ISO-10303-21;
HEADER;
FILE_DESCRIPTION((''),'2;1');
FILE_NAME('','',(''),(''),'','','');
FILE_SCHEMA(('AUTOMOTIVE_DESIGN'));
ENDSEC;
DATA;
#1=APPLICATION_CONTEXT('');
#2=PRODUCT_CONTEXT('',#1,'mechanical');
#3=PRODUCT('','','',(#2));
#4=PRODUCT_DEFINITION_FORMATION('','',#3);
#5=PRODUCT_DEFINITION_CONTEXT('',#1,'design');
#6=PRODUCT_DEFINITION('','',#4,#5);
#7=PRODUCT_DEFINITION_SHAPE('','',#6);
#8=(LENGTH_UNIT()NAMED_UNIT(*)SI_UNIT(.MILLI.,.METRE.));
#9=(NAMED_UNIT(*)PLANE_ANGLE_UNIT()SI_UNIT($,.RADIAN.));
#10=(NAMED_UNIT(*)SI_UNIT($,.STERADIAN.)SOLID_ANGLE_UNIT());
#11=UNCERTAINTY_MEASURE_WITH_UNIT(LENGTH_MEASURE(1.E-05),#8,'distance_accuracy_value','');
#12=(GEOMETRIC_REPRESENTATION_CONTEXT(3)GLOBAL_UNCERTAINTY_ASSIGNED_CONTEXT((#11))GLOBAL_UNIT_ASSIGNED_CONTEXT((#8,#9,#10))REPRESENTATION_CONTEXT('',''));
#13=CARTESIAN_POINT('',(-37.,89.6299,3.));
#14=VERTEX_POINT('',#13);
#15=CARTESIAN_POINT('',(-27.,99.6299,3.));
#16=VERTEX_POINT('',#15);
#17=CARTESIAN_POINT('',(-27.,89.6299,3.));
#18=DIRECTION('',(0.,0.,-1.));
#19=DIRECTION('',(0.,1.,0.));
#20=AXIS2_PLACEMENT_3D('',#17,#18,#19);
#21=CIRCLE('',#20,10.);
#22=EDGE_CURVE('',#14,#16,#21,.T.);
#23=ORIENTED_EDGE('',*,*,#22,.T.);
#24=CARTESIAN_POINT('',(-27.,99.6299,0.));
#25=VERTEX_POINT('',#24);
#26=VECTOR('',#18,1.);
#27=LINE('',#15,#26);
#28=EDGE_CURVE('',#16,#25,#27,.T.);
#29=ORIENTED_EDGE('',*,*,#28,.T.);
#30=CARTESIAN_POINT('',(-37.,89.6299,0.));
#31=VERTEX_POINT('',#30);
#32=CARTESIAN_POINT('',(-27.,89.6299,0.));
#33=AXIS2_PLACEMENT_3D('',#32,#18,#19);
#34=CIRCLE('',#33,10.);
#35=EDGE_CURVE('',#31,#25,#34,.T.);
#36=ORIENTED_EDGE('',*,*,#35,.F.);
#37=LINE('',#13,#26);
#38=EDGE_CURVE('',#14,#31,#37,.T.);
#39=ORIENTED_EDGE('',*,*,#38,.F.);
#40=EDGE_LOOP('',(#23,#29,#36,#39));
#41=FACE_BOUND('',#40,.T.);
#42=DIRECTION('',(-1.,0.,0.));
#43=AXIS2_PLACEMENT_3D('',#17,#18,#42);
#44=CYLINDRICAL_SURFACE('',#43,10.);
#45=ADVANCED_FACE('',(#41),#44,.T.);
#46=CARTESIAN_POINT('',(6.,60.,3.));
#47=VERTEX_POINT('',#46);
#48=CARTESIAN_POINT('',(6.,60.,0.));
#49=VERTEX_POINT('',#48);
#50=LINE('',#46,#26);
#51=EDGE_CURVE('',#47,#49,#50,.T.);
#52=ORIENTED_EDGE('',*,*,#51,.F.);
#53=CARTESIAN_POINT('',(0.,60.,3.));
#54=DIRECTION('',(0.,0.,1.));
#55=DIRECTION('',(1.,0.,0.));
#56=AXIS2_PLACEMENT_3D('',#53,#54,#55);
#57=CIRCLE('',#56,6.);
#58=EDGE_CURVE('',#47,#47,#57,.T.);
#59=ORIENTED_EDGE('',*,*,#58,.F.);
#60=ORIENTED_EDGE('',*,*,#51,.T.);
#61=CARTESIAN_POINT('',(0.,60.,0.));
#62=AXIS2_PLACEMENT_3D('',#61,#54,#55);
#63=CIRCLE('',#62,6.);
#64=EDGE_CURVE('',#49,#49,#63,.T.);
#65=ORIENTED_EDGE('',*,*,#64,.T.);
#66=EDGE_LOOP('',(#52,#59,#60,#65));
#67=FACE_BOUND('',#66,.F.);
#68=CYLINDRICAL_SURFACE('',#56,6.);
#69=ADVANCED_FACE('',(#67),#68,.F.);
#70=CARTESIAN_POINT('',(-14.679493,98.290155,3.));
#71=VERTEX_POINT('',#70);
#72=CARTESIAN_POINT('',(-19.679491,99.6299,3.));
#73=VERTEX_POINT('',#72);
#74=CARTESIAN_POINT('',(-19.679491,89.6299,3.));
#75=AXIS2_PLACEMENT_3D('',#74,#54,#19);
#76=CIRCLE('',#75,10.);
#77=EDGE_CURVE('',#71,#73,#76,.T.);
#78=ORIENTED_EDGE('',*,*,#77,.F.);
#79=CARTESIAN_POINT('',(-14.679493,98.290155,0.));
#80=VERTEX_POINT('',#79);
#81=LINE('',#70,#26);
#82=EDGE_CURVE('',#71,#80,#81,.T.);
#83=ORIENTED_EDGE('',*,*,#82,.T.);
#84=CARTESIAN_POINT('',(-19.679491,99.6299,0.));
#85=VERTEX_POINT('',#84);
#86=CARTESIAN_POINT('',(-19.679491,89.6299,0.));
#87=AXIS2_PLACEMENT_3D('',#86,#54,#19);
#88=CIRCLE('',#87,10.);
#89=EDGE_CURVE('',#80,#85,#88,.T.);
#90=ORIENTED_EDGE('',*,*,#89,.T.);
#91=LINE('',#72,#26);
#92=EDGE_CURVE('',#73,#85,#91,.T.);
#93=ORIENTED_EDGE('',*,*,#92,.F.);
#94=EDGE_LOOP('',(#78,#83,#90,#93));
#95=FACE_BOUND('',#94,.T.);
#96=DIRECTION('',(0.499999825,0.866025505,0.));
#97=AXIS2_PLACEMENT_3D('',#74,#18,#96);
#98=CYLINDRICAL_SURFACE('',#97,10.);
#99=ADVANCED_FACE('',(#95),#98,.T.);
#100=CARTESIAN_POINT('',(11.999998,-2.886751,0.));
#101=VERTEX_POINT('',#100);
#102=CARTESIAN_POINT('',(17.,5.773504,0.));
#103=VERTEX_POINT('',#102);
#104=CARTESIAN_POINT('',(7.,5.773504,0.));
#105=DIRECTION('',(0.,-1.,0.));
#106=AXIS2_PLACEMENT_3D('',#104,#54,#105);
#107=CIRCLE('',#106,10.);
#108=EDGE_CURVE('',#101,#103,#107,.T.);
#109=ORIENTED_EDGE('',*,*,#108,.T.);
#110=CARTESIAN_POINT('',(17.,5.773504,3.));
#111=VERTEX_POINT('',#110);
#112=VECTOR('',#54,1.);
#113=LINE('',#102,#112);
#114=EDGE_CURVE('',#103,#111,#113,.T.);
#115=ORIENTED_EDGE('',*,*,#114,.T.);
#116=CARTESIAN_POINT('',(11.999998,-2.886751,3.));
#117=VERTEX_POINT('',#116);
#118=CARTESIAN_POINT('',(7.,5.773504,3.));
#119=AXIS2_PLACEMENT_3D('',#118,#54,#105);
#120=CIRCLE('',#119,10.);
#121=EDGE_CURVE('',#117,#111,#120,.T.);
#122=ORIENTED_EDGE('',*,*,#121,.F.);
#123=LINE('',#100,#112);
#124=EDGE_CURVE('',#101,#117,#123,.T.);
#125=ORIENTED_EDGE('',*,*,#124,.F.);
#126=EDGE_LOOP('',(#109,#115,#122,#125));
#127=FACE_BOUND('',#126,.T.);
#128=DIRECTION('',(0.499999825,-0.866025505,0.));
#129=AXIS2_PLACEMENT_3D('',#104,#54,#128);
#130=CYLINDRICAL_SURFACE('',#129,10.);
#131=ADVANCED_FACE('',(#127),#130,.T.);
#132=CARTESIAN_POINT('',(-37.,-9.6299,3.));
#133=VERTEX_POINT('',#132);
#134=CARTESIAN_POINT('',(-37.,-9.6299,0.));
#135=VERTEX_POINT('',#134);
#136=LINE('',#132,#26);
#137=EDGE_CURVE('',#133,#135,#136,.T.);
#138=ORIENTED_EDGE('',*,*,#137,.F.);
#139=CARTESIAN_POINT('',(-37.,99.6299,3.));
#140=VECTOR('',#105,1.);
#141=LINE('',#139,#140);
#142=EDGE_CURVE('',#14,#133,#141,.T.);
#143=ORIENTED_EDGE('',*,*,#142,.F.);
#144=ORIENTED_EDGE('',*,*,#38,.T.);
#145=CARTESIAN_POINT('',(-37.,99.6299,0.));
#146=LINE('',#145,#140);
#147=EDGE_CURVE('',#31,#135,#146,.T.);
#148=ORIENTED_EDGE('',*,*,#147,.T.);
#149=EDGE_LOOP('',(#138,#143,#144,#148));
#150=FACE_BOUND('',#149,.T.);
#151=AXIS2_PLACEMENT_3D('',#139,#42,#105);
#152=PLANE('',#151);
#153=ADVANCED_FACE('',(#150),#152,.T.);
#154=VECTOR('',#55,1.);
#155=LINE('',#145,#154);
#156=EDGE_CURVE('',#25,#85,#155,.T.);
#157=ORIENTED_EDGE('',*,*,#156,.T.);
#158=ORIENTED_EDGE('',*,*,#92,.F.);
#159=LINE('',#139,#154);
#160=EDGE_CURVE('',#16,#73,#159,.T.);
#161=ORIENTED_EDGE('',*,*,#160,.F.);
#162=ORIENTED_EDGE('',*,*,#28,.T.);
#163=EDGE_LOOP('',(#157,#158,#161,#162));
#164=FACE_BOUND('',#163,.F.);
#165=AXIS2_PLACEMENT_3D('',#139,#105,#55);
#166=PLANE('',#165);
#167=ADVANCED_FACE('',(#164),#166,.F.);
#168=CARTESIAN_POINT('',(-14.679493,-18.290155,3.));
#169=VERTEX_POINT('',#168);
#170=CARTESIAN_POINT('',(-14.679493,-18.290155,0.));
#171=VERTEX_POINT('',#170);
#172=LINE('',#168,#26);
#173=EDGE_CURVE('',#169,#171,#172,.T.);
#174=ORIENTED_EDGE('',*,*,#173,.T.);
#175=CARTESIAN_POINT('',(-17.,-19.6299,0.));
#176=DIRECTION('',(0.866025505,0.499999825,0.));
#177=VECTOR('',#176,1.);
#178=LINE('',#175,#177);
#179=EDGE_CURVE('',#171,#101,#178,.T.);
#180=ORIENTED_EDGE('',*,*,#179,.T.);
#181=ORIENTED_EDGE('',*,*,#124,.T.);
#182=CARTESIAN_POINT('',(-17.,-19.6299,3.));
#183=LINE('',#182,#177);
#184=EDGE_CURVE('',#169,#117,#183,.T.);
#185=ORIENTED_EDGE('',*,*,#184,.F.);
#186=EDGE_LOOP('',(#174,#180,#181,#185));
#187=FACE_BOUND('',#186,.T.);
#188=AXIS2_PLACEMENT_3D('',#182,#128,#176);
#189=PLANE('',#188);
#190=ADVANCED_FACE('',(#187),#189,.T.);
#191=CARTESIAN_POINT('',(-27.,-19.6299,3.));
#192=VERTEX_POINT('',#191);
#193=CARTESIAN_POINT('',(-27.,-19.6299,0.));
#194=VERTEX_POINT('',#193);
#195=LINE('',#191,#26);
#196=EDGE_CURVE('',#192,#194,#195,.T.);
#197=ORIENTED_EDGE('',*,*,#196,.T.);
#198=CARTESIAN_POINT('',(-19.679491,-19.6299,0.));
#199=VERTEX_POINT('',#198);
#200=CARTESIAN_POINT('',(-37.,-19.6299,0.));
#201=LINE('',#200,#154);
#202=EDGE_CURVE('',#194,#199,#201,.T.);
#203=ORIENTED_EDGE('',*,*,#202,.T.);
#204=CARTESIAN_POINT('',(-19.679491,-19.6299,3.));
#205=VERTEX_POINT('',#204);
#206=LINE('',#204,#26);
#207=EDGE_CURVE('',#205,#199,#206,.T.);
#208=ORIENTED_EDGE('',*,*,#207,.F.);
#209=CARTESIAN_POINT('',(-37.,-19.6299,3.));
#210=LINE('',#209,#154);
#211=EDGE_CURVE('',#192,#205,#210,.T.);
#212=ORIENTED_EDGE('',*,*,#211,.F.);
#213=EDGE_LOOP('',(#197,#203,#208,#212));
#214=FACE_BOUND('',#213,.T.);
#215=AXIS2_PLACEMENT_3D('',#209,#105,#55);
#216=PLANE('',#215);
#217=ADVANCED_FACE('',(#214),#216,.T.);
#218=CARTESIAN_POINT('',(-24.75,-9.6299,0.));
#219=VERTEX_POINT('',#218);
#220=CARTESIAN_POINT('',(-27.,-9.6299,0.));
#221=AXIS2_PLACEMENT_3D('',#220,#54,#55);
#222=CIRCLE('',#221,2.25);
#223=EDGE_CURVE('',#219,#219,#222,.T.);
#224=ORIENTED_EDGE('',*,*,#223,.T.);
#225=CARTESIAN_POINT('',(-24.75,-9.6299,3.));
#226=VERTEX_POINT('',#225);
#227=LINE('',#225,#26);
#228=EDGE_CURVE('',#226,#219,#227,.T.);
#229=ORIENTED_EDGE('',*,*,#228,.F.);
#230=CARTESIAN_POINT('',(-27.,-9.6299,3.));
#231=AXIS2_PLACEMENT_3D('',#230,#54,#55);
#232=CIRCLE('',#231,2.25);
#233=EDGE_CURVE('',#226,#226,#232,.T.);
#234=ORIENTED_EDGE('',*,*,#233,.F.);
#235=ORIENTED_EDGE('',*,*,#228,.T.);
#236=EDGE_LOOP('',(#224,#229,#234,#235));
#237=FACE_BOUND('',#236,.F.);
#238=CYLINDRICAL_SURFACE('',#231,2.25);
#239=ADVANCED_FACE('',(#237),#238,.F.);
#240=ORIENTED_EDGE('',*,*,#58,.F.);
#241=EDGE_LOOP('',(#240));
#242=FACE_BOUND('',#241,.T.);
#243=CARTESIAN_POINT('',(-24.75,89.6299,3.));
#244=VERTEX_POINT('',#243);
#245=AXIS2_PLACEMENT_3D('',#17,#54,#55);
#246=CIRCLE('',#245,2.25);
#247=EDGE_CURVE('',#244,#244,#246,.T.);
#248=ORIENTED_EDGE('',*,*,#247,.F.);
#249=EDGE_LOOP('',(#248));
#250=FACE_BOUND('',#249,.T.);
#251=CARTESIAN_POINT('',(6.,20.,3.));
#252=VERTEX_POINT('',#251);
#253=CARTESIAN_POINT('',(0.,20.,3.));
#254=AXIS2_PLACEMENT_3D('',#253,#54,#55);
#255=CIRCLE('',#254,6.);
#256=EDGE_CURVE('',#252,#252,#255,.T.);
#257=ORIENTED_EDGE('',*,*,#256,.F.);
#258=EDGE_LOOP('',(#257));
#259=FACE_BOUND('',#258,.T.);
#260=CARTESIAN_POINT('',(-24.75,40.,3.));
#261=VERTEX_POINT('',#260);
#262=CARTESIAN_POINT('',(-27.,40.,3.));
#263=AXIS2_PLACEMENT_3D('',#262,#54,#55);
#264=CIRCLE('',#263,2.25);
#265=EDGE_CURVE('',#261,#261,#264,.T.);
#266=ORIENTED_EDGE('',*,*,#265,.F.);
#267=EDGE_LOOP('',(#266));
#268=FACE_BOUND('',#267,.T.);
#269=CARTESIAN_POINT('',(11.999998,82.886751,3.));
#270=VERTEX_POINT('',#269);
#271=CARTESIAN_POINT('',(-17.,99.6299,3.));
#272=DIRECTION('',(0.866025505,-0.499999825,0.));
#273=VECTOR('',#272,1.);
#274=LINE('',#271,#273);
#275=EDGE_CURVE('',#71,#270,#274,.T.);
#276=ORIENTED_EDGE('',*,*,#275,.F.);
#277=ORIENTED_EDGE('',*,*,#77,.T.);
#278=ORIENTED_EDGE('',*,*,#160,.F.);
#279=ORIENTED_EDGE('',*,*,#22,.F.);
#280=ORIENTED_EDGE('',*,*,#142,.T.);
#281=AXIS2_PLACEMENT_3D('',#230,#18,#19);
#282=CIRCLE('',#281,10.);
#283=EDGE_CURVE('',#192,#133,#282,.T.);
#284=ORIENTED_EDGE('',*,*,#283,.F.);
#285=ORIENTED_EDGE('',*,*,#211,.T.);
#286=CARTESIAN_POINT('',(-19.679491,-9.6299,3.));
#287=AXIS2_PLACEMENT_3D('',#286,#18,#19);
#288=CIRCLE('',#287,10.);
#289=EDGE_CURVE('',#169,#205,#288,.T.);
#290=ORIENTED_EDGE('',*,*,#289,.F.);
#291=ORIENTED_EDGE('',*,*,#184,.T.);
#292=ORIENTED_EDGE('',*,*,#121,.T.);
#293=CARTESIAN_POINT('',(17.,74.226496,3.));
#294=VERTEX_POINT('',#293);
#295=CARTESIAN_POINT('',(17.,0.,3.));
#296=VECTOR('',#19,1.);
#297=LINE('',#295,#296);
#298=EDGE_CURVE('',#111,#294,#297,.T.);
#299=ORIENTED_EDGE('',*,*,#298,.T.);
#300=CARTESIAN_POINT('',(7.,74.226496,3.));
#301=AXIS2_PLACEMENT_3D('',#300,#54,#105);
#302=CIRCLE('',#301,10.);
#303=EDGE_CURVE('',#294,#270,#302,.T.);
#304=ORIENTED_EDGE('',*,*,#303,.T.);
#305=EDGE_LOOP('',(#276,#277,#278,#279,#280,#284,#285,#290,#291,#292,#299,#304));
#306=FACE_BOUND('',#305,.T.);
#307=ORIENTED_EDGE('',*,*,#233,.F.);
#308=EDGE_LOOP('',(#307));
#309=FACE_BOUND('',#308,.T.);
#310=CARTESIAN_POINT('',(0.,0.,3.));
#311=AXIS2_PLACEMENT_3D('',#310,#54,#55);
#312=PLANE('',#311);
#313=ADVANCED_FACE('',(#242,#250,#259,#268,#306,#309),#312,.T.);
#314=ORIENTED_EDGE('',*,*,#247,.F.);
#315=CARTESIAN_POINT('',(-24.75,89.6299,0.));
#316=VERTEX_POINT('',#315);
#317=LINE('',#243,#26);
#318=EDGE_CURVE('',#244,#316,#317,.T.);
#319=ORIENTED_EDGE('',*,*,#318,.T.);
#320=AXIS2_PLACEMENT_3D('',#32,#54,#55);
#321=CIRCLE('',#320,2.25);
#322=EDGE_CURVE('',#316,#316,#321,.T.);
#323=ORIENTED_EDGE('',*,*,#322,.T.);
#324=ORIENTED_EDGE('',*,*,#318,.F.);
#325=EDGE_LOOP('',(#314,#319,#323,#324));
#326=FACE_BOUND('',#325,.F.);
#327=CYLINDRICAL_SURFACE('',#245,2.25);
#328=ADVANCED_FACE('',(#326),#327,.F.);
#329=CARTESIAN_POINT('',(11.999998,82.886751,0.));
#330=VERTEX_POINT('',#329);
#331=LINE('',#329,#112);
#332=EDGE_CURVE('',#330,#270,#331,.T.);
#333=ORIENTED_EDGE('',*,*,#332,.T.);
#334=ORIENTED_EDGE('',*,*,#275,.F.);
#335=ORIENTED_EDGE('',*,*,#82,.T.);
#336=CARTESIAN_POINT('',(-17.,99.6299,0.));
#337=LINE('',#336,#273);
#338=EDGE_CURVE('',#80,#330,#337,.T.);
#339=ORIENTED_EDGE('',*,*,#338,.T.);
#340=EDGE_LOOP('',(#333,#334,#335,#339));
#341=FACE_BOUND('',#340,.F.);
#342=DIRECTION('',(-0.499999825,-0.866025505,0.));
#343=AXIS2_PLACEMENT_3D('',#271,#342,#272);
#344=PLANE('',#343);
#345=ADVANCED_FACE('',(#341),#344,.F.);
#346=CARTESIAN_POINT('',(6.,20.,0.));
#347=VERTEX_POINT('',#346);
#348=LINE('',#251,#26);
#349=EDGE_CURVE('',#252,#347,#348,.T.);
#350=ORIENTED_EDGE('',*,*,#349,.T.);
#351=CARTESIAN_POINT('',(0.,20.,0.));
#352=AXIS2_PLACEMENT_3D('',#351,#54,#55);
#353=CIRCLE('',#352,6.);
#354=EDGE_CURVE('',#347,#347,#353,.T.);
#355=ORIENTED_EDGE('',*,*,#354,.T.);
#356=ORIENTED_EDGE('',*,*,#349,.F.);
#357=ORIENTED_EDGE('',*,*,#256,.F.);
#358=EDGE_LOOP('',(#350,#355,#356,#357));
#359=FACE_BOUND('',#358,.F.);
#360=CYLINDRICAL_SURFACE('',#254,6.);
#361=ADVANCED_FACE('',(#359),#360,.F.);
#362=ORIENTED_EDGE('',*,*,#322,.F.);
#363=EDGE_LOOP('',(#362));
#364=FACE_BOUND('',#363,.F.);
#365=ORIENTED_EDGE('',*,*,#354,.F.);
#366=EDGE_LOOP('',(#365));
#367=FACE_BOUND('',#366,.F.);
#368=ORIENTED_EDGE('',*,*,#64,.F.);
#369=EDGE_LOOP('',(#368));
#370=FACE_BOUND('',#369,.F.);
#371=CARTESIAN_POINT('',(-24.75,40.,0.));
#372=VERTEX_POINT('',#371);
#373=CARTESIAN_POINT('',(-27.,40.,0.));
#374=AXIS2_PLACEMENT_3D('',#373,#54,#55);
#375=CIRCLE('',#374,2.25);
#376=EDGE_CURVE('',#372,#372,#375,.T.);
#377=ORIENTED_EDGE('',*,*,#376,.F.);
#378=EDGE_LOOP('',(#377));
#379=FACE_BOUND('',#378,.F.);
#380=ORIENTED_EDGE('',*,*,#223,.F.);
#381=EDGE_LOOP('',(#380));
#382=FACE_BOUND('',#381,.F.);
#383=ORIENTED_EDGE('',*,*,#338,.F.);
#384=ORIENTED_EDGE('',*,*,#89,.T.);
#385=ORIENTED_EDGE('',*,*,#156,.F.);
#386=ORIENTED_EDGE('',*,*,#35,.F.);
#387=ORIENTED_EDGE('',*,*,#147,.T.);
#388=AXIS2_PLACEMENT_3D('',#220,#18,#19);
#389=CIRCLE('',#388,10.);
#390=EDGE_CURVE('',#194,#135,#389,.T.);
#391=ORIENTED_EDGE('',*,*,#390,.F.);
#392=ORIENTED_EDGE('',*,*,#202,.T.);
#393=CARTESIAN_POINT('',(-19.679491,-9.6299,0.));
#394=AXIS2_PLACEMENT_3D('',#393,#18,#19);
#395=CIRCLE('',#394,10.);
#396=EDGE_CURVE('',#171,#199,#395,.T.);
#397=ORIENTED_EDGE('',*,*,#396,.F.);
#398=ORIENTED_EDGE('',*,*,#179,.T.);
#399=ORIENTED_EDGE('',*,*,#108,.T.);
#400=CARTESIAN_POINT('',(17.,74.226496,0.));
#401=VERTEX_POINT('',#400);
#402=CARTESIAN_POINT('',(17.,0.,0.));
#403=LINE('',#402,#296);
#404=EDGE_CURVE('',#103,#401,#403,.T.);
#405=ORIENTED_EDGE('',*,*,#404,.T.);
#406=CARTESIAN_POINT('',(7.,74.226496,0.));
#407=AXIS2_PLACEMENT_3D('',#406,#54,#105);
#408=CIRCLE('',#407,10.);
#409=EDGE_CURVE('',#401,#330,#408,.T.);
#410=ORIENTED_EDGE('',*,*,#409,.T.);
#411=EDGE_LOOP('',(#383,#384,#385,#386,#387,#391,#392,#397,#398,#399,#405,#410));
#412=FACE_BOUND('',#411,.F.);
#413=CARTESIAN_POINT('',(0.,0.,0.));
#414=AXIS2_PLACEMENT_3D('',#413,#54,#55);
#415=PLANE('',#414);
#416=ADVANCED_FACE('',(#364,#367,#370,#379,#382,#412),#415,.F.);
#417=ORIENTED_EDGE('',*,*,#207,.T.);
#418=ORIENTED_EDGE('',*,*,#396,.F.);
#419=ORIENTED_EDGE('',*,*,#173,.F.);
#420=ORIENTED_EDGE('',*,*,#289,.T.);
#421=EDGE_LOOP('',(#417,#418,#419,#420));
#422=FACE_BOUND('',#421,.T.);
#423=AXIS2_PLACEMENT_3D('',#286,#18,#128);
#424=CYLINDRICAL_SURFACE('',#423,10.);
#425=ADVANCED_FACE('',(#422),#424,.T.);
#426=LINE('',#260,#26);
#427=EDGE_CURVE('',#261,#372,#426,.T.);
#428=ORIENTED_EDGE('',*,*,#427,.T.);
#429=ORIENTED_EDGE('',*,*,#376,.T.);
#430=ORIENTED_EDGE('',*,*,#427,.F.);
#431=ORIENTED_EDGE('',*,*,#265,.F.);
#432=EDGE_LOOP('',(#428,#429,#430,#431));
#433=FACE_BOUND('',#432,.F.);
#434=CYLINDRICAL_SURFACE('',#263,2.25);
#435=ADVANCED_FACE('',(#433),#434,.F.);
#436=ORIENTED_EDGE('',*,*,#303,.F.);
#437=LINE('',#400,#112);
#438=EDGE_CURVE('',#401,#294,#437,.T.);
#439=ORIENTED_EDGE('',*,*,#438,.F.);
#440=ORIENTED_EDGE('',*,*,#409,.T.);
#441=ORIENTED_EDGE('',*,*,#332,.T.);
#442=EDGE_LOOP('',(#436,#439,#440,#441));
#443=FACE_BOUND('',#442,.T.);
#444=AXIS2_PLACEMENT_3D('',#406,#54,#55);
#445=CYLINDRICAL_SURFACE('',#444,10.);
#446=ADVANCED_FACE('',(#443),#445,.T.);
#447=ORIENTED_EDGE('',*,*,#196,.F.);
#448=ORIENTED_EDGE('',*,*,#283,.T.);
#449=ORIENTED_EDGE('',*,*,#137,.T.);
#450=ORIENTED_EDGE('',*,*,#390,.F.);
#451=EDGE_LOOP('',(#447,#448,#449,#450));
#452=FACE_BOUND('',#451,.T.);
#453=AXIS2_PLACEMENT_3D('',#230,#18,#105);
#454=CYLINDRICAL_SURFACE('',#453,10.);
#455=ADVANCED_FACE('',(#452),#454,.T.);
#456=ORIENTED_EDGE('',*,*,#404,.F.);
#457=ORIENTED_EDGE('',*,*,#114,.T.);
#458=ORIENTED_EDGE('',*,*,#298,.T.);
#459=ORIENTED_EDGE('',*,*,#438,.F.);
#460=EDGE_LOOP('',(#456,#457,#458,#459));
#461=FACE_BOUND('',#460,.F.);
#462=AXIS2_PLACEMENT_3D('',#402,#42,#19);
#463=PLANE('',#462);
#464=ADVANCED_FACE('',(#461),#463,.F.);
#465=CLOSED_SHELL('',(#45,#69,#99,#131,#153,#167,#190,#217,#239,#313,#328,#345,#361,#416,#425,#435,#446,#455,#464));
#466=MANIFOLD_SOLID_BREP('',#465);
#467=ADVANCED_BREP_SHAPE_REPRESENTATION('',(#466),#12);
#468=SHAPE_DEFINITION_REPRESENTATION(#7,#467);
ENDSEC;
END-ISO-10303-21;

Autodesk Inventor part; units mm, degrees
ref_plane "YZ Plane" through (0, 0, 0) normal (1, 0, 0) x (0, 1, 0)
ref_plane "XZ Plane" through (0, 0, 0) normal (0, 1, 0) x (-1, 0, 0)
ref_plane "XY Plane" through (0, 0, 0) normal (0, 0, 1) x (1, 0, 0)
sketch "スケッチ1" plane through (0, 0, 0) normal (0, 0, 1) x (1, 0, 0)
  line L0 (17, 0) -> (17, 80)
  line L1 (17, 80) -> (0, 80)
  line L2 (0, 80) -> (0, 0) construction
  line L3 (-17, 0) -> (-17, 80)
  line L4 (-17, 80) -> (0, 80)
  line L5 (-17, 0) -> (17, 0)
  dimension "d75" = 34
  dimension "d86" = 80
extrude "プレート1" add sketch "スケッチ1" along normal blind 3
sketch "スケッチ3" plane through (0, 0, 3) normal (0, 0, 1) x (1, 0, 0)
  line L0 (-17, 80) -> (17, 80) construction
  line L1 (-17, 0) -> (-17, 80) construction
  line L2 (17, 80) -> (17, 0) construction
  line L3 (0, 0) -> (0, 80) construction
  line L4 (-17, 40) -> (17, 40) construction
  circle A0 centre (0, 60) radius 6
  circle A1 centre (0, 20) radius 6
  line L5 (17, 0) -> (-17, 0) projected
  point P0 (0, 0)
  dimension "d8" = 12
  dimension "d9" = 20
  dimension "d10" = 20
extrude "切り取り1" cut sketch "スケッチ3" against normal blind 3
sketch "スケッチ14" plane through (0, 0, 3) normal (0, 0, 1) x (1, 0, 0)
  line L0 (-17, 80) -> (17, 80)
  line L1 (-17, 0) -> (-17, 80)
  line L2 (17, 0) -> (-17, 0)
  line L3 (-37, 99.6299) -> (-37, -19.6299)
  line L4 (-37, -19.6299) -> (-17, -19.6299)
  line L5 (17, 0) -> (17, 80)
  line L6 (-17, -19.6299) -> (17, 0)
  line L7 (-37, 99.6299) -> (-17, 99.6299)
  line L8 (-17, 99.6299) -> (17, 80)
  line L9 (-27, 99.6299) -> (-27, -19.6299) construction
  line L10 (-27, 40) -> (-37, 40) construction
  circle A0 centre (-27, 89.6299) radius 2.25
  circle A1 centre (-27, -9.6299) radius 2.25
  circle A2 centre (-27, 40) radius 2.25
  point P0 (0, 0)
  dimension "d87" = 20
  dimension "d88" = 30
  dimension "d89" = 30
  dimension "d90" = 4.5
  dimension "d91" = 10
  dimension "d92" = 10
sheet face with bend "面3" sketch "スケッチ14" thickness 3 toward (0, 0, -1) bend radius 0 contours L1 L2 L6 L4 L3 L7 L8 L0
bend "曲げ5"
fillet "フィレット4" radius 10 6 edges at (-37, 99.6299, 1.5) (-17, 99.6299, 1.5) (17, 80, 1.5) (17, 0, 1.5) (-17, -19.6299, 1.5) (-37, -19.6299, 1.5)
equation "\"d11\" = Thickness"
equation "\"d89\" = d88"
equation "\"d92\" = d91"
equation "\"d5\" = Thickness"
equation "\"d10\" = d9"
equation "\"d94\" = BendReliefWidth"
equation "\"d96\" = MinimumRemnant"
equation "\"d95\" = BendReliefDepth"
equation "\"BendReliefWidth\" = Thickness"
equation "\"BendReliefDepth\" = 0.5 * Thickness"
equation "\"CornerReliefSize\" = 4 * Thickness"
equation "\"MinimumRemnant\" = 2 * Thickness"
equation "\"GapSize\" = Thickness"
equation "\"Thickness\" = 3"
properties part number "robocup_power_sw_plate" material "アルミニウム 6061"
